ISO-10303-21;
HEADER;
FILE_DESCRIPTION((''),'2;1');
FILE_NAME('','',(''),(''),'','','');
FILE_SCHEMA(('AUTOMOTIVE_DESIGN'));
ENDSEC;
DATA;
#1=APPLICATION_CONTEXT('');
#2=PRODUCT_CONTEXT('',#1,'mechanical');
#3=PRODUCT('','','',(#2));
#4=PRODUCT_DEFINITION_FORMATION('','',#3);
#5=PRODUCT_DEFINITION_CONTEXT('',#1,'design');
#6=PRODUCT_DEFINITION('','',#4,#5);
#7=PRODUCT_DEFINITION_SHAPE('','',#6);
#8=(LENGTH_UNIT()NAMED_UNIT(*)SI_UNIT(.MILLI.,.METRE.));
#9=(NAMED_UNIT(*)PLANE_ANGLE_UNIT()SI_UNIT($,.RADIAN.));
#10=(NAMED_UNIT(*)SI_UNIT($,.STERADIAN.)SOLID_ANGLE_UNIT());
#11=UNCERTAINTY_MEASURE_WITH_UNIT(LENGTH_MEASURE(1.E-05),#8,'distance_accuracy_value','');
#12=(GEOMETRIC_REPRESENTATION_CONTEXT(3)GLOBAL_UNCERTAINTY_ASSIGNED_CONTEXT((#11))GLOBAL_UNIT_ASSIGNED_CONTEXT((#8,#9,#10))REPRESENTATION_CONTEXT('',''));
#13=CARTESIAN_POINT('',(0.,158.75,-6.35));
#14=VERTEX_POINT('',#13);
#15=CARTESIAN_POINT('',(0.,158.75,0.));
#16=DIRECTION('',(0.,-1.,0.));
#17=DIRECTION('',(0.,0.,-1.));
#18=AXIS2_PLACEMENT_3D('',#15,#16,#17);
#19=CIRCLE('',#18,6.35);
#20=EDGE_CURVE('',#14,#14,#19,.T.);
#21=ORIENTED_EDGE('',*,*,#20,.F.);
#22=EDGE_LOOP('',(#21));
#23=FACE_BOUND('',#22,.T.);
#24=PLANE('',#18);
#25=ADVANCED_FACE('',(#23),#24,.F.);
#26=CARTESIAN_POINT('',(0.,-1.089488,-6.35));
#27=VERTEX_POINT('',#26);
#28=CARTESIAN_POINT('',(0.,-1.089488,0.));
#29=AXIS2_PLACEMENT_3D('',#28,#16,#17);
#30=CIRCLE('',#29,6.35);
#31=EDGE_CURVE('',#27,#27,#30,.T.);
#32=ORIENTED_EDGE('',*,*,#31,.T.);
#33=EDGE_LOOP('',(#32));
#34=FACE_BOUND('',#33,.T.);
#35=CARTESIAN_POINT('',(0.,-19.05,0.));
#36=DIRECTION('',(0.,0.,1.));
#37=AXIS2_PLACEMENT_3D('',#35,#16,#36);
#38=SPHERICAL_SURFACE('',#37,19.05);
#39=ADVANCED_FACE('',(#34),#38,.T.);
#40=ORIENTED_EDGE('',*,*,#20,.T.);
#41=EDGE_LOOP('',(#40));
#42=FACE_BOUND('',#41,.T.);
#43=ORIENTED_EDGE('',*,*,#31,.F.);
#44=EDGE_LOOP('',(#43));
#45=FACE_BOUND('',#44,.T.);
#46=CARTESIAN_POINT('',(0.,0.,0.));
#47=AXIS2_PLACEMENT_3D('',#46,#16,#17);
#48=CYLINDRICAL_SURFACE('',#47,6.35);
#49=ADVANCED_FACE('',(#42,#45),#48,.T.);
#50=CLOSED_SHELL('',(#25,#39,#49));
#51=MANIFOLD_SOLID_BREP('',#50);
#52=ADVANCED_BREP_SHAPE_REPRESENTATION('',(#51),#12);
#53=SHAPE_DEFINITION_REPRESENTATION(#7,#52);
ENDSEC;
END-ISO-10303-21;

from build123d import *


with BuildPart() as part:
    # Sketch1 → Revolve1 (revolve)
    with BuildSketch(Plane.YZ):
        with BuildLine():
            Line((158.75, 6.35), (-1.089487758, 6.35))
            ThreePointArc((-1.089487758, 6.35), (-22.271392695, 18.775652561), (-38.1, 0))
            Line((-38.1, 0), (158.75, 0))
            Line((158.75, 0), (158.75, 6.35))
        make_face()
    revolve(axis=Axis((0, 0, 0), (0, 1, 0)))


solid = part.part
